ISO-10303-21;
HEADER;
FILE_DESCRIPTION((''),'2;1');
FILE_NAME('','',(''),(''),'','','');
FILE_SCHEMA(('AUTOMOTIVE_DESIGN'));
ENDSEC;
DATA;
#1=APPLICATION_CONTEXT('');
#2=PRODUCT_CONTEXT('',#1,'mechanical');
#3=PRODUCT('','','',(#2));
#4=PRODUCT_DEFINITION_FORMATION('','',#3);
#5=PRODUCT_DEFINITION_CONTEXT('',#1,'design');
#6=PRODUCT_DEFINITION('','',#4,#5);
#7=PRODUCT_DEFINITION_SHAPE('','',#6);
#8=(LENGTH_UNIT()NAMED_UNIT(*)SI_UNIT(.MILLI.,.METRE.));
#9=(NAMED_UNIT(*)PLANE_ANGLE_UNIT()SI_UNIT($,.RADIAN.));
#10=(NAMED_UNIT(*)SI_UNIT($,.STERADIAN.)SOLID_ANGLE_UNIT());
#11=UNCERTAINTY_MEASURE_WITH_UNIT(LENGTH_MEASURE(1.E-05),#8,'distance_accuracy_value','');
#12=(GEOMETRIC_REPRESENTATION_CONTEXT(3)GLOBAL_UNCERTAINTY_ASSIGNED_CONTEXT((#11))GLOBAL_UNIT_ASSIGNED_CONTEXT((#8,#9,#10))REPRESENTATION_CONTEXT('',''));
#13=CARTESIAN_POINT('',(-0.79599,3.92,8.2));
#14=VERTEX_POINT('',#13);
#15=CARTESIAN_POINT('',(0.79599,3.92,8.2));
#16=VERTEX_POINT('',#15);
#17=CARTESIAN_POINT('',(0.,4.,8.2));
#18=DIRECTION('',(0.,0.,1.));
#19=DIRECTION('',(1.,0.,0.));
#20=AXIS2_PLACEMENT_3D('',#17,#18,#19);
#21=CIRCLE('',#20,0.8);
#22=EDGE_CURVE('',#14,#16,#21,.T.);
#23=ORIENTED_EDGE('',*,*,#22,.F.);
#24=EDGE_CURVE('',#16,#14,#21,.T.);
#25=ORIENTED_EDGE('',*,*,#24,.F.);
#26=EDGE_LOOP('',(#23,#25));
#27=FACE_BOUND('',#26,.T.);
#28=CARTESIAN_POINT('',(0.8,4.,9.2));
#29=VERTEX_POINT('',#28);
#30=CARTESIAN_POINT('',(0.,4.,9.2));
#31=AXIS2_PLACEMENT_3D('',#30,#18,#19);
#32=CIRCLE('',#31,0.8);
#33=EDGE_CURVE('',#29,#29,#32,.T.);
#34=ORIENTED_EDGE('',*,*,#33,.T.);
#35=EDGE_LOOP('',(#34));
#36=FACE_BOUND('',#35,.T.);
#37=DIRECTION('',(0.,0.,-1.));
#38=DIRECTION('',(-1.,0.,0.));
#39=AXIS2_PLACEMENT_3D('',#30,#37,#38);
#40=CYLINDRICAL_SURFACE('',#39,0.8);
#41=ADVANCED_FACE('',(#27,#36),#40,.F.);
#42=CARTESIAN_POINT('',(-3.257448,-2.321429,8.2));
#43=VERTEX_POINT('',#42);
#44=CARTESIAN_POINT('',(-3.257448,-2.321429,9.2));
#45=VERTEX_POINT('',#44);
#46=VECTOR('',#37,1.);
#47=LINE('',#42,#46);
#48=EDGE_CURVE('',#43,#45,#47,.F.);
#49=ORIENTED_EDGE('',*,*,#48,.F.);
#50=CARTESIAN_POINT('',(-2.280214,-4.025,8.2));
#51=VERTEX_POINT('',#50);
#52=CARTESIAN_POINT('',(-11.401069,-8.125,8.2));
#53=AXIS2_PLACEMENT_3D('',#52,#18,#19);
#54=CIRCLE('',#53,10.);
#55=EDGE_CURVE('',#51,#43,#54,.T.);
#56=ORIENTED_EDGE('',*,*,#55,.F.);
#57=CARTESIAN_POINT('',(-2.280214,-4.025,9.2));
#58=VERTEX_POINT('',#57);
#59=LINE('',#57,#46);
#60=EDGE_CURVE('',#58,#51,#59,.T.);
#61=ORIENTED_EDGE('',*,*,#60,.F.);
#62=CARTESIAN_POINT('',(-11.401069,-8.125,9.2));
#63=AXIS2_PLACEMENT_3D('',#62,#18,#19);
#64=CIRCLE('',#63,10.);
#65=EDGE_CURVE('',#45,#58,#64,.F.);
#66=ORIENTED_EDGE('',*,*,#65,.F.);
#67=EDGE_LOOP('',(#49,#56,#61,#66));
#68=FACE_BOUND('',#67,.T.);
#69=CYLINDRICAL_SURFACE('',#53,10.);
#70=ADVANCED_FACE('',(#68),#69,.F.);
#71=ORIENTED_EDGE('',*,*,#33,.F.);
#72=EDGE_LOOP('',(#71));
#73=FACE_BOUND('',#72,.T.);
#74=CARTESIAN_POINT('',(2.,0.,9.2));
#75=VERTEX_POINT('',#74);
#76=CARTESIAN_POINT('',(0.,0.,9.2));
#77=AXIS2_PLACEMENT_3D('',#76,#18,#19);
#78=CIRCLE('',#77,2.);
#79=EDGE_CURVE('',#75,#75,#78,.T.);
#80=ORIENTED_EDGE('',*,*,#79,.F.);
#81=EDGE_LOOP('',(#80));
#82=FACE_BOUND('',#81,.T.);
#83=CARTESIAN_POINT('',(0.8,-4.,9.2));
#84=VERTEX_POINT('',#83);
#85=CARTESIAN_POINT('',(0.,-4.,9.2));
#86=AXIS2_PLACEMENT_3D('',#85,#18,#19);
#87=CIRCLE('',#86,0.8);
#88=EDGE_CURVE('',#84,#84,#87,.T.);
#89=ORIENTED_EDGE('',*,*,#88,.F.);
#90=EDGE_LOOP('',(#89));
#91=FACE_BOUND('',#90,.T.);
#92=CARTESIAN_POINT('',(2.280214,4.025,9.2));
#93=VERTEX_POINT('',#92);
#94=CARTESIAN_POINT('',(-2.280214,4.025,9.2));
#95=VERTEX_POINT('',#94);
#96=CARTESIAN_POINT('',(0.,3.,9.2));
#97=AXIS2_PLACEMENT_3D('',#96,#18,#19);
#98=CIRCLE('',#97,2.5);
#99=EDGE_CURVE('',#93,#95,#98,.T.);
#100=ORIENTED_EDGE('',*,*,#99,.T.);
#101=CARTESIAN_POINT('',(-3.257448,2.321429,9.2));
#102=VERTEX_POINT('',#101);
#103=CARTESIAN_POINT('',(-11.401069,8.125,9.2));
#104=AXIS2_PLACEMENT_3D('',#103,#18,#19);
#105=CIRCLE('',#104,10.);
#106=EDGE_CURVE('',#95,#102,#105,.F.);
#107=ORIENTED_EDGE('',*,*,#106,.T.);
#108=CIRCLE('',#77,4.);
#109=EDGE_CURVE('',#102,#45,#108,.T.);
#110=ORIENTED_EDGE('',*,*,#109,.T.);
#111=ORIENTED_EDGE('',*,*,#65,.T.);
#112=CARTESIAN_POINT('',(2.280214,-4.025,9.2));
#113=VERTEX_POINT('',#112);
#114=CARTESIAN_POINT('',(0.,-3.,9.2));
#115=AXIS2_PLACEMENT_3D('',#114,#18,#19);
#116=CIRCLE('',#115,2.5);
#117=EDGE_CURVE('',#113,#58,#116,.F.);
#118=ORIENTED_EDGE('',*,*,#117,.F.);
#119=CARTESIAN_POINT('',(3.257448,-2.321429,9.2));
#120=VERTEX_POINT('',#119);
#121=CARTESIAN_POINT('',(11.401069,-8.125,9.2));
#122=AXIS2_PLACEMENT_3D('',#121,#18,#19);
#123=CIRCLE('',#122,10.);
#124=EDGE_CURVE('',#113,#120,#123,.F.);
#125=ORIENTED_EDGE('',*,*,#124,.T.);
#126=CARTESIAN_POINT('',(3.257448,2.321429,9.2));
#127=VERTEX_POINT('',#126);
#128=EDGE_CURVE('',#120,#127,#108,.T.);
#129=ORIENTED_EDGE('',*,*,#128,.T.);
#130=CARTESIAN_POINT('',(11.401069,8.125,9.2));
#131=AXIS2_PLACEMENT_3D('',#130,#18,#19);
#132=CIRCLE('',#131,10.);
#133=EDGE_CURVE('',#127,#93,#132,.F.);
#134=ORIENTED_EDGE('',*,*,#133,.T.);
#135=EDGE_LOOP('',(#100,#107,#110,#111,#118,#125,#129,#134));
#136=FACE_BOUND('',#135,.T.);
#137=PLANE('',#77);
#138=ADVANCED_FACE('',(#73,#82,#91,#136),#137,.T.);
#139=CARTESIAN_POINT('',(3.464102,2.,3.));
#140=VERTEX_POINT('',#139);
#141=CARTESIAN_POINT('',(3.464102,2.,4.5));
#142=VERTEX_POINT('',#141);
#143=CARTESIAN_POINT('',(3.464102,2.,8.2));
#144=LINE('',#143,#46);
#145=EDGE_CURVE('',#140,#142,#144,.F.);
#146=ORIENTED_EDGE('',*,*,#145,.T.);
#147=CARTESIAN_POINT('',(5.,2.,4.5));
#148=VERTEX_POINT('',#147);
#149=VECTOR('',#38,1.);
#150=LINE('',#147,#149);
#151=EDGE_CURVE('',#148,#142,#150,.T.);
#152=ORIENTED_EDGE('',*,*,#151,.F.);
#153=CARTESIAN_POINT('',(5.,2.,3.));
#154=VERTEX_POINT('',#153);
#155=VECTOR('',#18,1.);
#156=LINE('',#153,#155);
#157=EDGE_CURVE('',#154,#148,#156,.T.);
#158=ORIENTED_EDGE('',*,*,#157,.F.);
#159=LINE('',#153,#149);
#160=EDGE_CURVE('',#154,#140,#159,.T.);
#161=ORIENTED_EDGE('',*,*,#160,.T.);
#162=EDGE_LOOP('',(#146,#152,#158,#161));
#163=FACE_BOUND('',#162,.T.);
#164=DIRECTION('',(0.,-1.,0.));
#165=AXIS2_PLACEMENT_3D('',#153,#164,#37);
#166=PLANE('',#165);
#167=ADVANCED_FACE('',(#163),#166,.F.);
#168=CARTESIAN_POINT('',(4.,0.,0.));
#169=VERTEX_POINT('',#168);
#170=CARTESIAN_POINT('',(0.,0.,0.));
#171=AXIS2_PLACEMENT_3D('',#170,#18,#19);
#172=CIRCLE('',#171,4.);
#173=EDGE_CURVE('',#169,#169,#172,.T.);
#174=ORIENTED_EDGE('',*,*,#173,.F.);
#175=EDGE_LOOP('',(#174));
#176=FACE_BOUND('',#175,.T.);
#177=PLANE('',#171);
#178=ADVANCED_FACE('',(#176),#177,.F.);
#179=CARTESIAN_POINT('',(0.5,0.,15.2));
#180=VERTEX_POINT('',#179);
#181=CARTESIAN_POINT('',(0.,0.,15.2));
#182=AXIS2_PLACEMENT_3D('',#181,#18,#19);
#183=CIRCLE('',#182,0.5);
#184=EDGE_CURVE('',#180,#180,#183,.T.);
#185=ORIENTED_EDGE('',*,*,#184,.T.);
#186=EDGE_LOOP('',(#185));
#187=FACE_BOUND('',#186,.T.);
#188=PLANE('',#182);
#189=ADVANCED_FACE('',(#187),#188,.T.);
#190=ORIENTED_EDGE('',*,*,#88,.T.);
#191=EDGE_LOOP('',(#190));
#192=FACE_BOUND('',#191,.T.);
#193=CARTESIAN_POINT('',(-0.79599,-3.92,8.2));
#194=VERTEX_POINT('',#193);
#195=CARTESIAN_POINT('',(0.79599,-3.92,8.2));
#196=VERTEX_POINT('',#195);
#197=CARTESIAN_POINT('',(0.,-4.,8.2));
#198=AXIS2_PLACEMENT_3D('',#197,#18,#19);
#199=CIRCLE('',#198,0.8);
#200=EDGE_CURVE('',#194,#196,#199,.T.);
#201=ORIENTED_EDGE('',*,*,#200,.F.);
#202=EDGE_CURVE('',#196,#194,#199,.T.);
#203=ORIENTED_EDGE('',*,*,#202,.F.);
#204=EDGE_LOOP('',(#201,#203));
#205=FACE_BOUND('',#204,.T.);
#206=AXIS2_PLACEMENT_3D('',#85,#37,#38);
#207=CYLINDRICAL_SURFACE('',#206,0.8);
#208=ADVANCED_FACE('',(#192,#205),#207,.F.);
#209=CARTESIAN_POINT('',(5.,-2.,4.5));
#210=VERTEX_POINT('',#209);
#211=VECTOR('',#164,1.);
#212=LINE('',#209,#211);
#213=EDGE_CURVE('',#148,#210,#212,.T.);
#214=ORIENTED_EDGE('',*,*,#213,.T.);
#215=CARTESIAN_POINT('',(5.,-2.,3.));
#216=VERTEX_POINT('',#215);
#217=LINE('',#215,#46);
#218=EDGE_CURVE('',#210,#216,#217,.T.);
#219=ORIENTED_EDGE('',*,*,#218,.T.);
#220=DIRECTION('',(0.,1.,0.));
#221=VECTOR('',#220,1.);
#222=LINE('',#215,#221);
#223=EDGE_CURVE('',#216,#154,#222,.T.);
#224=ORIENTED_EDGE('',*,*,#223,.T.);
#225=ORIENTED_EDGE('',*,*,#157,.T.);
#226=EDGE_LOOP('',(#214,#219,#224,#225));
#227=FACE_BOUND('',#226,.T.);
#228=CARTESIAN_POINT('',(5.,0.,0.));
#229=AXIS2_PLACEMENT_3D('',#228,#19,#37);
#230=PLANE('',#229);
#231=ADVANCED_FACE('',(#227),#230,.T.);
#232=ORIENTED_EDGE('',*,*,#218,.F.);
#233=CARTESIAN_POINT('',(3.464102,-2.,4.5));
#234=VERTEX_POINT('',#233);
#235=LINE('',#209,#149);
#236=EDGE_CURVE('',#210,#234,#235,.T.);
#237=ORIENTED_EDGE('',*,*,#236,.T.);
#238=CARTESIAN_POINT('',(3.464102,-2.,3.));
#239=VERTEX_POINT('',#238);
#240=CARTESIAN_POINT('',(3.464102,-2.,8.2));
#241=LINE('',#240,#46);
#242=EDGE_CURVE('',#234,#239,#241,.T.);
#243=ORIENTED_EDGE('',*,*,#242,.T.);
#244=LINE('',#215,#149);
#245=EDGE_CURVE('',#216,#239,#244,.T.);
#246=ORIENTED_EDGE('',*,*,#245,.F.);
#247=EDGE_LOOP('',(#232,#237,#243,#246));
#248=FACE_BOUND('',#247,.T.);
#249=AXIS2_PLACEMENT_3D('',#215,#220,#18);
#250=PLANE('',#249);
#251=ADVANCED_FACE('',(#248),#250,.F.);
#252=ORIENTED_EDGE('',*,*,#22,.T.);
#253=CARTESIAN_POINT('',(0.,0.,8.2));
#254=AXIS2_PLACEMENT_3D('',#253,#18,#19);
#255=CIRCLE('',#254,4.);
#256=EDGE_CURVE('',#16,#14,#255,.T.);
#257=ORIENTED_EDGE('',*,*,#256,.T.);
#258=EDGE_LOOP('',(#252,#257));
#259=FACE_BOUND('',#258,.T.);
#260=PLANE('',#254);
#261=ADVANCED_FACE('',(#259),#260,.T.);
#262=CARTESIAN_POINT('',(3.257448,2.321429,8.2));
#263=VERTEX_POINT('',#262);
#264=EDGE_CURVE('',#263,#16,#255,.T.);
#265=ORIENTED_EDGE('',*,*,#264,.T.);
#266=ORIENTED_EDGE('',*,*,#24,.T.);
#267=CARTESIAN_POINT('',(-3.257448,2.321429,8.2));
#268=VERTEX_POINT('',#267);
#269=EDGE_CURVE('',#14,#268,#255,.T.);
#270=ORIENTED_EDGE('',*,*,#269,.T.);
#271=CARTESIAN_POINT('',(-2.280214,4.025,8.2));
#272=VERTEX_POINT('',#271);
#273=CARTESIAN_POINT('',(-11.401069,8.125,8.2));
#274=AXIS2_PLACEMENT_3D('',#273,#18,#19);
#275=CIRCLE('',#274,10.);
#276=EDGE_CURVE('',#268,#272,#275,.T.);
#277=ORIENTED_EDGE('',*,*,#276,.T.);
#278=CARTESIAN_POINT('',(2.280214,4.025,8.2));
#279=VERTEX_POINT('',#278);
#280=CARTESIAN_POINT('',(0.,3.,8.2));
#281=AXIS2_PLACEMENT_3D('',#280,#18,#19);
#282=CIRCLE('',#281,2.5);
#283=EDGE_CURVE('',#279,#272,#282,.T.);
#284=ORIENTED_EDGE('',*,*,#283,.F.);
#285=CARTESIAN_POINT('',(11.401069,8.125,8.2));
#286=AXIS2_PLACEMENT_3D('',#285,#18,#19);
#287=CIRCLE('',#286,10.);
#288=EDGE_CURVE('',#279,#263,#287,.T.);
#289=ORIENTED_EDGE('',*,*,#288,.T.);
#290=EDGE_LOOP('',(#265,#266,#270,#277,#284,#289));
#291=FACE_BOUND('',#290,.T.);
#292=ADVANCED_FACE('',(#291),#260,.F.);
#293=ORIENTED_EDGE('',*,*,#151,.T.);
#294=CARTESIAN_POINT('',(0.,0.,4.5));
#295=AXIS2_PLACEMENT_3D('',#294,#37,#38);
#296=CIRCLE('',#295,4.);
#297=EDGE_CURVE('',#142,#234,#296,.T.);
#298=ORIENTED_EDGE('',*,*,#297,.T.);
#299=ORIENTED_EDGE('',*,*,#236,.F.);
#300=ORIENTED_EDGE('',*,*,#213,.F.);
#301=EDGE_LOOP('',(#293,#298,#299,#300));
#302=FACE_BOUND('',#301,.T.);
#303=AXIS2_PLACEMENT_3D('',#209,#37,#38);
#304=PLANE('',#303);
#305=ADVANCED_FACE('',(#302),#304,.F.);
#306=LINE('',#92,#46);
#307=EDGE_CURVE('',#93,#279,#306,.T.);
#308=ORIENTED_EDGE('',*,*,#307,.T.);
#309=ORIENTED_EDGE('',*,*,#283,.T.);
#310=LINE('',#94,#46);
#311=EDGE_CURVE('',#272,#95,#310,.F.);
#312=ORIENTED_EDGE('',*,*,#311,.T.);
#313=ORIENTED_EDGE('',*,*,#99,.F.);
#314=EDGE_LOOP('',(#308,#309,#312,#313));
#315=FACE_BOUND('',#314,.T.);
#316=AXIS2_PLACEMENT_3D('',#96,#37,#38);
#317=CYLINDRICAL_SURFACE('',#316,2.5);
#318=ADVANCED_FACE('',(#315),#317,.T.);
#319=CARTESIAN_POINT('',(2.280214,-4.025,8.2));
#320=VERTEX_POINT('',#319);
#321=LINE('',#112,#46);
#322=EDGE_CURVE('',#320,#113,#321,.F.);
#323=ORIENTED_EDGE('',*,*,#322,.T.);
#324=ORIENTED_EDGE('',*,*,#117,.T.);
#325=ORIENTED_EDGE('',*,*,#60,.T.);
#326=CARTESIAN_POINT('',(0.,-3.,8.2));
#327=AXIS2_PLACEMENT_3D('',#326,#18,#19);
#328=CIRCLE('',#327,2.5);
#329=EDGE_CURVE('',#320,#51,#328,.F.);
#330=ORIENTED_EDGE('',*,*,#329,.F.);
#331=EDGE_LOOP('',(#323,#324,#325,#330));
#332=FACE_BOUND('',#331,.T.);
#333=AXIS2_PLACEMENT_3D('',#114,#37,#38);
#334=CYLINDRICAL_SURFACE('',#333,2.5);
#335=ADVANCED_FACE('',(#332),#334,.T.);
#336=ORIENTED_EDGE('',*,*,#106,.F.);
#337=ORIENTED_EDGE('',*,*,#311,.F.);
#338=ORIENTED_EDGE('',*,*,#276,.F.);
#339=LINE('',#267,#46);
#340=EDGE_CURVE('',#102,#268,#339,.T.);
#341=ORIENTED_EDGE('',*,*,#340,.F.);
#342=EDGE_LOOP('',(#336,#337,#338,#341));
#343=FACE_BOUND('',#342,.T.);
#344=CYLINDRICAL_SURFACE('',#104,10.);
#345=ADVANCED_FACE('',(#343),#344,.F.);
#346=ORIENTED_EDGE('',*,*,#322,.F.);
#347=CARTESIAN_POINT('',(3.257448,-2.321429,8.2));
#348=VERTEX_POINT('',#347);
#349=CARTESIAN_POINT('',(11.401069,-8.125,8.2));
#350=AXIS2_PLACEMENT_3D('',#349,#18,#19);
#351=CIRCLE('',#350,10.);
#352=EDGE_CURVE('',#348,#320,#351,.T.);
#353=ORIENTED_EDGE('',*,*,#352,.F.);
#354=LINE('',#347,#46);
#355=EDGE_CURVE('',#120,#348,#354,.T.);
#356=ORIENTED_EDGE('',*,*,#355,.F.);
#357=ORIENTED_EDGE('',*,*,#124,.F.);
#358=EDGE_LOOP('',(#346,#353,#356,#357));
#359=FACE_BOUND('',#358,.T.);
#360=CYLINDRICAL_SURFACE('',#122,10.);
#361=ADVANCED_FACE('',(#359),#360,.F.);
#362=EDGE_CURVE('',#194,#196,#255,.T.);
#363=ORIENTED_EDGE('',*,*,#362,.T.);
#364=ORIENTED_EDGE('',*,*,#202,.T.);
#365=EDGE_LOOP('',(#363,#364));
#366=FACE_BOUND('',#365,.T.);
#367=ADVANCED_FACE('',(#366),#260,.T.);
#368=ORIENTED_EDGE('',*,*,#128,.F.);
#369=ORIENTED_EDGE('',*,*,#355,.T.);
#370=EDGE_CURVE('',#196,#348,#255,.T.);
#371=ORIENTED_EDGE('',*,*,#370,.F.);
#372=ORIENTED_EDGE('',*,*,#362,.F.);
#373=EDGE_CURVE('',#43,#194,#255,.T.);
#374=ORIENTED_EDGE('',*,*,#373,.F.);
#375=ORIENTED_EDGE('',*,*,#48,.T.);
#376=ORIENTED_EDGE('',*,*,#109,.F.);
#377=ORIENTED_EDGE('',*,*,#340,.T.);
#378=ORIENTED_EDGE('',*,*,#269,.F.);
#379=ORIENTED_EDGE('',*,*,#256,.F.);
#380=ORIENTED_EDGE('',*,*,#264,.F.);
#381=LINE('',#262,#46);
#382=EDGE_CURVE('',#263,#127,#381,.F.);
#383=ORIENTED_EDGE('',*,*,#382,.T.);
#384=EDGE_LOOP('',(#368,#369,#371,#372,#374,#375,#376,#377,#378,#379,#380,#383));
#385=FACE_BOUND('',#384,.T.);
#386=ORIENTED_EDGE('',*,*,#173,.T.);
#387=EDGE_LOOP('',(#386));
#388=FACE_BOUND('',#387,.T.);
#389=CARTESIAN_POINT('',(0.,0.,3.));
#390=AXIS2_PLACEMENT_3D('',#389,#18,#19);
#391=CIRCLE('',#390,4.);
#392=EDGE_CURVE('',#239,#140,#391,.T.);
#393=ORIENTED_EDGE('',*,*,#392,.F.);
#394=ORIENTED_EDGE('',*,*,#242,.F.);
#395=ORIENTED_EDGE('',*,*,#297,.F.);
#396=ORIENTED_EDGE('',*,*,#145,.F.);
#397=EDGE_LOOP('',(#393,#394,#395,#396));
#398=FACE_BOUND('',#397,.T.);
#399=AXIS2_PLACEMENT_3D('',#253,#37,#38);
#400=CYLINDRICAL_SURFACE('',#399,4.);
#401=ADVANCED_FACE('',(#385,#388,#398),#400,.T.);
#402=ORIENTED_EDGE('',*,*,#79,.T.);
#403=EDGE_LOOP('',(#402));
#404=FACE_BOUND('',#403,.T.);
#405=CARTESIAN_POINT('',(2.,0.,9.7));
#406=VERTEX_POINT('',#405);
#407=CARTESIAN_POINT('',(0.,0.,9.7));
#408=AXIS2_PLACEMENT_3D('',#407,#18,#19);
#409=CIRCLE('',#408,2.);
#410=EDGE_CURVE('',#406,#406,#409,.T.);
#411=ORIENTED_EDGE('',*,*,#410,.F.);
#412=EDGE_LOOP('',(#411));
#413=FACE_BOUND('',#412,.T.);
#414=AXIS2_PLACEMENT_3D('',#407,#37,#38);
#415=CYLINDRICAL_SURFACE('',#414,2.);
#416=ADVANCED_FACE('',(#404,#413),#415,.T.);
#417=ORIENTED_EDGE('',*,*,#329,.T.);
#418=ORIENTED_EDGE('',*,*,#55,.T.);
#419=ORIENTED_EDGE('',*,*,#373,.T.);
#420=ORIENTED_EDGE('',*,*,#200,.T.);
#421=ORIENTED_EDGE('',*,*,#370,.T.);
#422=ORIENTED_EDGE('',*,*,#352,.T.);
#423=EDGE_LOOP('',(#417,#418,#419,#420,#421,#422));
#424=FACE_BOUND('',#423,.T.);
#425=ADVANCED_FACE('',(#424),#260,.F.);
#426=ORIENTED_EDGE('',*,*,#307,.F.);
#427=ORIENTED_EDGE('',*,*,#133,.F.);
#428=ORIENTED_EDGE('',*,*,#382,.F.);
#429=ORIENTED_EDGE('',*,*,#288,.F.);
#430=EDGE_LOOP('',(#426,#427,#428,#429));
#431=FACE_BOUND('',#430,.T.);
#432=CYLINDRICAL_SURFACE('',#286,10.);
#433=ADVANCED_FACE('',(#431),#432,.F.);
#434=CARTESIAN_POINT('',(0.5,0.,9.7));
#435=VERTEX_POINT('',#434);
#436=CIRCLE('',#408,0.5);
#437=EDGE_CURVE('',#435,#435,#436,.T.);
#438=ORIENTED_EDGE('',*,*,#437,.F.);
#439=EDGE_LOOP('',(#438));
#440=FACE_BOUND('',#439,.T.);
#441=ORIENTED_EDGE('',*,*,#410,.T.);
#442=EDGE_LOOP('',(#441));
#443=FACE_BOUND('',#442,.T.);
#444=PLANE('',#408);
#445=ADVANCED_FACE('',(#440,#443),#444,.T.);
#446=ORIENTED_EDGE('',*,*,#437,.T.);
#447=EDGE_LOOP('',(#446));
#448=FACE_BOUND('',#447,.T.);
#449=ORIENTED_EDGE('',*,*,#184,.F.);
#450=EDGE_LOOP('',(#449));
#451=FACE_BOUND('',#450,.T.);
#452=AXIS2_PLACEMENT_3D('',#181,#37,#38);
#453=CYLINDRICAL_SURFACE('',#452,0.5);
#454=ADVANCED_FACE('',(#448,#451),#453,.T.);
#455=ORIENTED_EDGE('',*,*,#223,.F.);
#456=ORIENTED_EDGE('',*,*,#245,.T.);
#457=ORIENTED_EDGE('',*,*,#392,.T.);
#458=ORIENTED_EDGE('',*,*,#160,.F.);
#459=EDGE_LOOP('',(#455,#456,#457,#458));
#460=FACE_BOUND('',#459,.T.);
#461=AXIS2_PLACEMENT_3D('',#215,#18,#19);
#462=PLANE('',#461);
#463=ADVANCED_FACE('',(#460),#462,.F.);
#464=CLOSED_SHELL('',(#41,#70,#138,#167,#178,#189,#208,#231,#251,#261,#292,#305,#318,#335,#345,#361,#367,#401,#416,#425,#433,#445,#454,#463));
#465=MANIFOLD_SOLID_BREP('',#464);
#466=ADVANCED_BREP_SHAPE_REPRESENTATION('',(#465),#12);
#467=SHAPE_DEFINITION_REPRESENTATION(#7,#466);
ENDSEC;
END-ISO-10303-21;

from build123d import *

# Parameters (mm, degrees)
SKETCH_2_R      = 4
EXTRUDE_1_DEPTH = 8.2
SKETCH_4_R      = 0.5
EXTRUDE_2_DEPTH = 7
SKETCH_5_R      = 1.5
EXTRUDE_3_DEPTH = 1
SKETCH_6_W      = 1.5
SKETCH_6_H      = 4
EXTRUDE_4_DEPTH = 5
EXTRUDE_5_DEPTH = 1
FILLET_1_R      = 10
SKETCH_8_R      = 2
EXTRUDE_6_DEPTH = 0.5


with BuildPart() as part:
    # 草图2 → 凸台-拉伸1 (new body)
    with BuildSketch(Plane.XY):
        Circle(SKETCH_2_R)
    extrude(amount=EXTRUDE_1_DEPTH)

    # 草图4 → 凸台-拉伸2 (add)
    with BuildSketch(Plane.XY.offset(8.2)):
        Circle(SKETCH_4_R)
    extrude(amount=EXTRUDE_2_DEPTH)

    # 草图5 → 凸台-拉伸3 (add)
    with BuildSketch(Plane.XY.offset(8.2)):
        Circle(SKETCH_5_R)
    extrude(amount=EXTRUDE_3_DEPTH)

    # 草图6 → 凸台-拉伸4 (add)
    with BuildSketch(Plane(origin=(0, 0, 0), x_dir=(0, 0, -1), z_dir=(1, 0, 0))):
        with Locations((-3.75, 0)):
            Rectangle(SKETCH_6_W, SKETCH_6_H)
    extrude(amount=EXTRUDE_4_DEPTH)

    # 草图7 → 凸台-拉伸5 (add)
    with BuildSketch(Plane.XY.offset(8.2)):
        with BuildLine():
            Line((4, 0), (1.5, 0))
            ThreePointArc((1.5, 0), (0, -1.5), (-1.5, 0))
            Line((-1.5, 0), (-4, 0))
            ThreePointArc((-4, 0), (-3.60468391, -1.733855216), (-2.496873044, -3.125))
            ThreePointArc((-2.496873044, -3.125), (-1.69373638, -3.623707642), (-0.79598995, -3.92))
            ThreePointArc((-0.79598995, -3.92), (0, -3.2), (0.79598995, -3.92))
            ThreePointArc((0.79598995, -3.92), (1.69373638, -3.623707642), (2.496873044, -3.125))
            ThreePointArc((2.496873044, -3.125), (3.60468391, -1.733855216), (4, 0))
        make_face()
        with BuildLine():
            ThreePointArc((-2.496873044, -3.125), (0, -5.5), (2.496873044, -3.125))
            ThreePointArc((2.496873044, -3.125), (1.69373638, -3.623707642), (0.79598995, -3.92))
            ThreePointArc((0.79598995, -3.92), (0.798996858, -3.95994978), (0.8, -4))
            ThreePointArc((0.8, -4), (-0.04005022, -4.798996858), (-0.79598995, -3.92))
            ThreePointArc((-0.79598995, -3.92), (-1.69373638, -3.623707642), (-2.496873044, -3.125))
        make_face()
        with BuildLine():
            ThreePointArc((-1.5, 0), (0, 1.5), (1.5, 0))
            Line((1.5, 0), (4, 0))
            ThreePointArc((4, 0), (3.60468391, 1.733855216), (2.496873044, 3.125))
            ThreePointArc((2.496873044, 3.125), (1.69373638, 3.623707642), (0.79598995, 3.92))
            ThreePointArc((0.79598995, 3.92), (0, 3.2), (-0.79598995, 3.92))
            ThreePointArc((-0.79598995, 3.92), (-1.69373638, 3.623707642), (-2.496873044, 3.125))
            ThreePointArc((-2.496873044, 3.125), (-3.60468391, 1.733855216), (-4, 0))
            Line((-4, 0), (-1.5, 0))
        make_face()
        with BuildLine():
            ThreePointArc((0.79598995, 3.92), (1.69373638, 3.623707642), (2.496873044, 3.125))
            ThreePointArc((2.496873044, 3.125), (0, 5.5), (-2.496873044, 3.125))
            ThreePointArc((-2.496873044, 3.125), (-1.69373638, 3.623707642), (-0.79598995, 3.92))
            ThreePointArc((-0.79598995, 3.92), (-0.04005022, 4.798996858), (0.8, 4))
            ThreePointArc((0.8, 4), (0.798996858, 3.95994978), (0.79598995, 3.92))
        make_face()
    extrude(amount=EXTRUDE_5_DEPTH)

    # 圆角1
    # the kernel refuses this fillet: 10 mm, written as the material it adds along each edge
    with BuildSketch(Plane(origin=(2.496873044, 3.125, 8.2), x_dir=(0.6874097542343248, -0.7262698050886497, 0), z_dir=(0, 0, 1)), Plane(origin=(-2.496873044, -3.125, 8.2), x_dir=(-0.6874097542343238, 0.7262698050886505, 0), z_dir=(0, 0, 1))) as fillet_1_piece_1:
        with BuildLine():
            CenterArc((2.489482148, 9.903897453), FILLET_1_R, 250.779418195, 11.270831285)
            ThreePointArc((-0.802576499, 0.461315716), (-0.379749812, 0.26812947), (0, 0))
            ThreePointArc((0, 0), (0.553218255, 0.038441019), (1.10643651, 0))
        make_face()
    extrude(amount=1)
    with BuildSketch(Plane(origin=(-2.496873044, 3.125, 8.2), x_dir=(-0.6874097542343243, -0.7262698050886502, 0), z_dir=(0, 0, 1)), Plane(origin=(2.496873044, -3.125, 8.2), x_dir=(0.6874097542343256, 0.7262698050886488, 0), z_dir=(0, 0, 1))) as fillet_1_piece_2:
        with BuildLine():
            CenterArc((2.489482148, -9.903897453), FILLET_1_R, 97.94975052, 11.270831285)
            ThreePointArc((-0.802576499, -0.461315716), (-0.379749812, -0.26812947), (0, 0))
            ThreePointArc((0, 0), (0.553218255, -0.038441019), (1.10643651, 0))
        make_face()
    extrude(amount=1)

    # 草图8 → 凸台-拉伸6 (add)
    with BuildSketch(Plane.XY.offset(9.2)):
        Circle(SKETCH_8_R)
    extrude(amount=EXTRUDE_6_DEPTH)


solid = part.part
